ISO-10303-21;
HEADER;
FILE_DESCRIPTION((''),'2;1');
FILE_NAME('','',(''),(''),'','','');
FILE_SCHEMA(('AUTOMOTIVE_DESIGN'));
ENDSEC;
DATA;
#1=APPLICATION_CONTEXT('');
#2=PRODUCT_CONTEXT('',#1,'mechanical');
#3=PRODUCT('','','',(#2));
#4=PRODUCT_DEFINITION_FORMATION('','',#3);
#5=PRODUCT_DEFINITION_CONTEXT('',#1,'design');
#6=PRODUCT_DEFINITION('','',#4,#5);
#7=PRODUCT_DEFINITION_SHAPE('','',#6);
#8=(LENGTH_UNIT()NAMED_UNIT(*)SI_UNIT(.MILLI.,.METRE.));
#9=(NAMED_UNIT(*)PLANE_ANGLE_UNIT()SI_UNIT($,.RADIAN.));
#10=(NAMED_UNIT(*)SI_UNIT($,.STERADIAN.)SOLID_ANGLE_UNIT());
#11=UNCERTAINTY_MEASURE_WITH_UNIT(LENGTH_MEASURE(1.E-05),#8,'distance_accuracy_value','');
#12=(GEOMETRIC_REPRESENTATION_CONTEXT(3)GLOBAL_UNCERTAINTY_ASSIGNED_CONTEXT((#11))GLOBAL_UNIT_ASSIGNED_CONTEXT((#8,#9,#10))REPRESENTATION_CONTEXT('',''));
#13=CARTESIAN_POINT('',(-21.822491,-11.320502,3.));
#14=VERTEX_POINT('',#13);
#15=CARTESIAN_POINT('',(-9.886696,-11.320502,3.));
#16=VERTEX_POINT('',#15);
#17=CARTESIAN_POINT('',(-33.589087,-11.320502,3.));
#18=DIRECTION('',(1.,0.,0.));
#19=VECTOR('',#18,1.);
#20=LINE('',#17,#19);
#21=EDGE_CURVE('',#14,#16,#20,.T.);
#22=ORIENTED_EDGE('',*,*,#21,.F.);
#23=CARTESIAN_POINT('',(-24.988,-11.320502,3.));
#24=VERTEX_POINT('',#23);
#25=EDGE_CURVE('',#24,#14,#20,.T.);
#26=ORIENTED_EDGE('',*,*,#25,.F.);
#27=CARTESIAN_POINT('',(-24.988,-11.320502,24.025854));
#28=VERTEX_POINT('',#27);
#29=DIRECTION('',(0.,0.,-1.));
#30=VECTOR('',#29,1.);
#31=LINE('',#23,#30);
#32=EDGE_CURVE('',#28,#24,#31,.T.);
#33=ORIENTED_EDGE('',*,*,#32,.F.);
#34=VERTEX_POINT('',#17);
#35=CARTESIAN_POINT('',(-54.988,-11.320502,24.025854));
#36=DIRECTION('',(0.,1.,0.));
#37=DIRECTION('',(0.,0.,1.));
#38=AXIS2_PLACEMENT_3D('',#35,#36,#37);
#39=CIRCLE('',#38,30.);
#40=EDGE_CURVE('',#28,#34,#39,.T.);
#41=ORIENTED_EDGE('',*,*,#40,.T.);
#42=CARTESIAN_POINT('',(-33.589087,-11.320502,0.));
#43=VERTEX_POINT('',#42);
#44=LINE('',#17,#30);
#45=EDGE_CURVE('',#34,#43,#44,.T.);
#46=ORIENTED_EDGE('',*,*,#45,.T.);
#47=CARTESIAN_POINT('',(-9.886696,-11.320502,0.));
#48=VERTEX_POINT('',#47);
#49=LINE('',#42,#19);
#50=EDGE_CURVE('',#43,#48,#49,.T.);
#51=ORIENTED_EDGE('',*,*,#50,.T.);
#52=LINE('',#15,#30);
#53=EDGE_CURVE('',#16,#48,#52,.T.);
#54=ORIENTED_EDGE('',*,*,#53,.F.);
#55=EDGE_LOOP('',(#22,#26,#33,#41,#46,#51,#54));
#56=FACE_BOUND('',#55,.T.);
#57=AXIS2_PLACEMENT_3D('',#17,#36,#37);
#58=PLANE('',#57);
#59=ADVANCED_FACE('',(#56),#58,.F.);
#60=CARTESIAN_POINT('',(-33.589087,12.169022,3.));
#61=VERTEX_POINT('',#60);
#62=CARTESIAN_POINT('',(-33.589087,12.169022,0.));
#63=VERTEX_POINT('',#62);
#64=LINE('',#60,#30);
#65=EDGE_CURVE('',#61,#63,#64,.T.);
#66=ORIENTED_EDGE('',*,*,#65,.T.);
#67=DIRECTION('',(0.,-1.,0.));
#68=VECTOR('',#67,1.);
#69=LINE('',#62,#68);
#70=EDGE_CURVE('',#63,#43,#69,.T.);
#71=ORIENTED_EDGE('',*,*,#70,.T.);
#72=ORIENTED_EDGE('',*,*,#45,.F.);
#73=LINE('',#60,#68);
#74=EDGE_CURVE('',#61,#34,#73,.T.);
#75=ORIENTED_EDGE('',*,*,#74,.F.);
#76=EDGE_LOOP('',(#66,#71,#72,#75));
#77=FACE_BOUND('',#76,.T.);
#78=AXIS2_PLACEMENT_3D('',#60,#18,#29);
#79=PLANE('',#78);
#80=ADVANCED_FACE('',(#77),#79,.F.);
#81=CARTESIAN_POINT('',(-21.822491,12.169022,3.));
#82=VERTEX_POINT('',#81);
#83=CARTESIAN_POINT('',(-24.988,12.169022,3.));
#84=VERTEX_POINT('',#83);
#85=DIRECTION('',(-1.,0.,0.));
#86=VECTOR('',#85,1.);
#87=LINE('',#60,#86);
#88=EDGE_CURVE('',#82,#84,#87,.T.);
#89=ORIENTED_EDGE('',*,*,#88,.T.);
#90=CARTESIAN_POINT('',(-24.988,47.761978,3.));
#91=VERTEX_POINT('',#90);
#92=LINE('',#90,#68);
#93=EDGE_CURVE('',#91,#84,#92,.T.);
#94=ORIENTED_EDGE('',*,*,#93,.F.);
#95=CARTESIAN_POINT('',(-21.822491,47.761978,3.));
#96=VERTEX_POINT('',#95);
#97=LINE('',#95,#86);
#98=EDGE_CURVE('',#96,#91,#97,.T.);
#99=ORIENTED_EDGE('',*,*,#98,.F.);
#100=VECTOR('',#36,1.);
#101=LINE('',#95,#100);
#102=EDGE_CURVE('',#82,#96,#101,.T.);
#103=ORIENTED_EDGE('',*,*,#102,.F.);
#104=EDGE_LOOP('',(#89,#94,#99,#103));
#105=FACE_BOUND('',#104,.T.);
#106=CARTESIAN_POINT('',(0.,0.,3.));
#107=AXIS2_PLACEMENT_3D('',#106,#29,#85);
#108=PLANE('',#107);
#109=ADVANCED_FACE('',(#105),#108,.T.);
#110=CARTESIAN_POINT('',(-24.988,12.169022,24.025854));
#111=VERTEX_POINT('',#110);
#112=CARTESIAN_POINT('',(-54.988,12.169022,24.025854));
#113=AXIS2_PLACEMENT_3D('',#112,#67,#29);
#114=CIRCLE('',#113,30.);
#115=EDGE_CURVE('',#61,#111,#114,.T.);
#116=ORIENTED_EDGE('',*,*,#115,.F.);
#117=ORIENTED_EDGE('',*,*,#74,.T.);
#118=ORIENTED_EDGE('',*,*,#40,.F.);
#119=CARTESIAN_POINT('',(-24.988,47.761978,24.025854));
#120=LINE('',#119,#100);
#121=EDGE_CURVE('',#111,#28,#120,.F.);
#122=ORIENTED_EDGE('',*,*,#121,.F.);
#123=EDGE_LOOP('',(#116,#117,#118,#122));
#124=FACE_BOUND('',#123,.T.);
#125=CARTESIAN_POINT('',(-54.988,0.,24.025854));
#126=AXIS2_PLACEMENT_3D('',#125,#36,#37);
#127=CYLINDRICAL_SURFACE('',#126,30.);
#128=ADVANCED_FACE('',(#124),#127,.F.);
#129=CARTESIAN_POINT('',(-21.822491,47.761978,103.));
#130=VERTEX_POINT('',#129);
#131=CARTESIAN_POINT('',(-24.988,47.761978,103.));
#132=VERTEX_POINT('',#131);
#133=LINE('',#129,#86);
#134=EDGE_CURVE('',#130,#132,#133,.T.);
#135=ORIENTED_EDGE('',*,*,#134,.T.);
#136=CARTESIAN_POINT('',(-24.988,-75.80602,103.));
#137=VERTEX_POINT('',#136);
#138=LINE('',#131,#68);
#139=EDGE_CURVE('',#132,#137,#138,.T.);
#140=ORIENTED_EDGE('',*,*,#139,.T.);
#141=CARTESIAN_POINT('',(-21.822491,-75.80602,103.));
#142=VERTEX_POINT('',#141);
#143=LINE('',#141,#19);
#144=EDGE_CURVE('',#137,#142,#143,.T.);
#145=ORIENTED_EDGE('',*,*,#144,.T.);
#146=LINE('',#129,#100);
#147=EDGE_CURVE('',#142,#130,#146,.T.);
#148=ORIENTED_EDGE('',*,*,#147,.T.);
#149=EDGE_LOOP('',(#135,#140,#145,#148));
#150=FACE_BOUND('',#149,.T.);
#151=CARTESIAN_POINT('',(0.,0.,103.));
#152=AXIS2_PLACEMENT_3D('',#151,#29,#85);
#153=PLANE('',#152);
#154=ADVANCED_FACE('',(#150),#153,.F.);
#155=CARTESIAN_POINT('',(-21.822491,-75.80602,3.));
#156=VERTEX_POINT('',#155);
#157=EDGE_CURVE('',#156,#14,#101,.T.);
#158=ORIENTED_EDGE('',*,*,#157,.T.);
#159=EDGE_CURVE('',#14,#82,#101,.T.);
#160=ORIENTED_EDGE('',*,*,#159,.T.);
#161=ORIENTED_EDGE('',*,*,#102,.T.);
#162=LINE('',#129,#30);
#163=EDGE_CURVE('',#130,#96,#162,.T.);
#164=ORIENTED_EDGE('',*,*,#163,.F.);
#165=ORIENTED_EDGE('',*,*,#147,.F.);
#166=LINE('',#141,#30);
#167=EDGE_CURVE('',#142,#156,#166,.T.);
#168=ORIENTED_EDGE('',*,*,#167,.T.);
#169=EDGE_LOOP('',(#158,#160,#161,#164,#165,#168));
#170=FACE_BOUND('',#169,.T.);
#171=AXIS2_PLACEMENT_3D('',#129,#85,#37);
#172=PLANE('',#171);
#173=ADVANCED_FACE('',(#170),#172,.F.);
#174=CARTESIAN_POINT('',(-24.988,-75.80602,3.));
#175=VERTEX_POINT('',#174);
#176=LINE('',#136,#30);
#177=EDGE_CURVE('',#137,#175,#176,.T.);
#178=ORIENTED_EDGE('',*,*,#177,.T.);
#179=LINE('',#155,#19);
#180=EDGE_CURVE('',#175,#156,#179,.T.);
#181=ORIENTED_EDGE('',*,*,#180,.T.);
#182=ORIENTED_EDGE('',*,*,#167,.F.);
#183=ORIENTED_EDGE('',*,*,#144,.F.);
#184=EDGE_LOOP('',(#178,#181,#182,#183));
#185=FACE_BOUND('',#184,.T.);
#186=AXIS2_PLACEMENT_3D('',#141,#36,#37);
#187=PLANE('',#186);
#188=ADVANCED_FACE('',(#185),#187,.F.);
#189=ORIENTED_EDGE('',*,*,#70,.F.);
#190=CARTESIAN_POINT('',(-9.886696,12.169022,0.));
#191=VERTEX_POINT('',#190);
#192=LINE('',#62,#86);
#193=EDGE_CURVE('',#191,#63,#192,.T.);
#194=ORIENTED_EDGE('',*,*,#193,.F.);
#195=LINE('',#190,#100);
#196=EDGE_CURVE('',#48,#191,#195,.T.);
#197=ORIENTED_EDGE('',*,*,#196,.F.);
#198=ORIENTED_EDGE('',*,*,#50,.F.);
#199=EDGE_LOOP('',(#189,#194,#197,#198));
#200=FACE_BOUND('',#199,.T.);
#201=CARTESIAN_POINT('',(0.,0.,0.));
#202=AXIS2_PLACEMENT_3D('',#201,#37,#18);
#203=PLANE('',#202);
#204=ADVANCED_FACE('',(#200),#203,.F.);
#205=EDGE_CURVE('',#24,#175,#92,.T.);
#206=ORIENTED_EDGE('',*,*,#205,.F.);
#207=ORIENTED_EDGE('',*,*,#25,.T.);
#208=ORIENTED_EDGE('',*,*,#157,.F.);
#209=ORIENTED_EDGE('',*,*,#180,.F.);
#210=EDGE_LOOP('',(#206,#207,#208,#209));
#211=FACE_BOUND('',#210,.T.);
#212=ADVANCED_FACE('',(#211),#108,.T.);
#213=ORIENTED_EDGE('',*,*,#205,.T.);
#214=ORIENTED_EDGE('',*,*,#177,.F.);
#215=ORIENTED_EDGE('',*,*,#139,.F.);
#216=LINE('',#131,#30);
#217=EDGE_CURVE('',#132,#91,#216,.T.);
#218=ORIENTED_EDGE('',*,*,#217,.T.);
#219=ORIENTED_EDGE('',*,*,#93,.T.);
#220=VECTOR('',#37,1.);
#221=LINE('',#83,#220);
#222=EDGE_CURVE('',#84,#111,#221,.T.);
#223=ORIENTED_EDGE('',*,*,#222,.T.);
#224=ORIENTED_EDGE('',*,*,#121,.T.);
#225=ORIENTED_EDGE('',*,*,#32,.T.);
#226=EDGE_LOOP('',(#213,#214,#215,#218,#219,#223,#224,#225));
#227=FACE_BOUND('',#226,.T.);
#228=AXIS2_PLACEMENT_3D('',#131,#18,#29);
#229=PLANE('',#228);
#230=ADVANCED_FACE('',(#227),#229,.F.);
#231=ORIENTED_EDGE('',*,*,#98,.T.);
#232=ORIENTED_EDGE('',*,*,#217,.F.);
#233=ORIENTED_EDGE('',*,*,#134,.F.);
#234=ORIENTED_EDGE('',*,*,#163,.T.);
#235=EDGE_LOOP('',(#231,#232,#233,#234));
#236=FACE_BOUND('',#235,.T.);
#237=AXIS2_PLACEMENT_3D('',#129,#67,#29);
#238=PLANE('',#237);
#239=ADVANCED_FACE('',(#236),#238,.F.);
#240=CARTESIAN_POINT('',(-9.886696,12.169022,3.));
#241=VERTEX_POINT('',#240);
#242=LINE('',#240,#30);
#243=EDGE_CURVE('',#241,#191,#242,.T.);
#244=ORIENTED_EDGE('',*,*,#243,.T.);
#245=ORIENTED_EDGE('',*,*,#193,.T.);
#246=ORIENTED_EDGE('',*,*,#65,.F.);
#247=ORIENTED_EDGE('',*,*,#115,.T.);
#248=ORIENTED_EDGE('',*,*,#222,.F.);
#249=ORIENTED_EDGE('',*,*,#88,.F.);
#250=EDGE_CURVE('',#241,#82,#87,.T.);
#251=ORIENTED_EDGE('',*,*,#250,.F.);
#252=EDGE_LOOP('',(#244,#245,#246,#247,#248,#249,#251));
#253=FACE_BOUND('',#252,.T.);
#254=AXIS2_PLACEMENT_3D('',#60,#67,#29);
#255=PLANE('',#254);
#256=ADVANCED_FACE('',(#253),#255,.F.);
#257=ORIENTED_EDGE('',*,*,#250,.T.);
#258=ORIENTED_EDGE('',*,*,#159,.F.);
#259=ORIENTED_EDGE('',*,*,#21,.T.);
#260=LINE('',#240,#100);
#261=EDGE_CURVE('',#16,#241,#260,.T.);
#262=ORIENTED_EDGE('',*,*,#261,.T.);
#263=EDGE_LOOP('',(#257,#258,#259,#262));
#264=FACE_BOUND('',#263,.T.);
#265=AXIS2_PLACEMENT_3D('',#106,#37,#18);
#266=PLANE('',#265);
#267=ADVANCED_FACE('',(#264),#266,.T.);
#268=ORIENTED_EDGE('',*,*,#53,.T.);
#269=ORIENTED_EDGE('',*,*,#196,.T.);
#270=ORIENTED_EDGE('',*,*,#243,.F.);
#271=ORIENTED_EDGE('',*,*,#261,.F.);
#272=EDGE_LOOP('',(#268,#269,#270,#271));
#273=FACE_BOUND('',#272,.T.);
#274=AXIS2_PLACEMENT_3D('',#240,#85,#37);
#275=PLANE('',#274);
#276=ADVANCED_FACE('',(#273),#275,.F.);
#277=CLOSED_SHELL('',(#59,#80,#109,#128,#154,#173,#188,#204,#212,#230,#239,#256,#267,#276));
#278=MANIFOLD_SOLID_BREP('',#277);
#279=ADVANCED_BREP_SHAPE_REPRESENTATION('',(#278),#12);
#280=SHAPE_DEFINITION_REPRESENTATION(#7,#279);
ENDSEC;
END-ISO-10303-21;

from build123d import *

# Parameters (mm, degrees)
SKETCH_2_W      = 23.702391565
SKETCH_2_H      = 23.489524234
EXTRUDE_1_DEPTH = 3
SKETCH_3_W      = 3.165508912
SKETCH_3_H      = 123.567997976
EXTRUDE_2_DEPTH = 100
FILLET_1_R      = 30


with BuildPart() as part:
    # 草图2 → 凸台-拉伸1 (new body)
    with BuildSketch(Plane.XY):
        with Locations((-21.737891338, 0.42425972)):
            Rectangle(SKETCH_2_W, SKETCH_2_H)
    extrude(amount=EXTRUDE_1_DEPTH)

    # 草图3 → 凸台-拉伸2 (add)
    with BuildSketch(Plane.XY.offset(3)):
        with Locations((-23.40524573, -14.022020715)):
            Rectangle(SKETCH_3_W, SKETCH_3_H)
    extrude(amount=EXTRUDE_2_DEPTH)

    # 圆角1
    # the kernel refuses this fillet: 30 mm, written as the material it adds along each edge
    with BuildSketch(Plane(origin=(-24.988000186, 12.169021837, 3), x_dir=(-1, 0, 0), z_dir=(0, -1, 0))) as fillet_1_piece_1:
        with BuildLine():
            CenterArc((30, -21.025853601), FILLET_1_R, 135.503813775, 44.496186225)
            Line((0, -21.025853601), (0, 0))
            Line((0, 0), (8.601086935, 0))
        make_face()
    extrude(amount=23.489524234)


solid = part.part
